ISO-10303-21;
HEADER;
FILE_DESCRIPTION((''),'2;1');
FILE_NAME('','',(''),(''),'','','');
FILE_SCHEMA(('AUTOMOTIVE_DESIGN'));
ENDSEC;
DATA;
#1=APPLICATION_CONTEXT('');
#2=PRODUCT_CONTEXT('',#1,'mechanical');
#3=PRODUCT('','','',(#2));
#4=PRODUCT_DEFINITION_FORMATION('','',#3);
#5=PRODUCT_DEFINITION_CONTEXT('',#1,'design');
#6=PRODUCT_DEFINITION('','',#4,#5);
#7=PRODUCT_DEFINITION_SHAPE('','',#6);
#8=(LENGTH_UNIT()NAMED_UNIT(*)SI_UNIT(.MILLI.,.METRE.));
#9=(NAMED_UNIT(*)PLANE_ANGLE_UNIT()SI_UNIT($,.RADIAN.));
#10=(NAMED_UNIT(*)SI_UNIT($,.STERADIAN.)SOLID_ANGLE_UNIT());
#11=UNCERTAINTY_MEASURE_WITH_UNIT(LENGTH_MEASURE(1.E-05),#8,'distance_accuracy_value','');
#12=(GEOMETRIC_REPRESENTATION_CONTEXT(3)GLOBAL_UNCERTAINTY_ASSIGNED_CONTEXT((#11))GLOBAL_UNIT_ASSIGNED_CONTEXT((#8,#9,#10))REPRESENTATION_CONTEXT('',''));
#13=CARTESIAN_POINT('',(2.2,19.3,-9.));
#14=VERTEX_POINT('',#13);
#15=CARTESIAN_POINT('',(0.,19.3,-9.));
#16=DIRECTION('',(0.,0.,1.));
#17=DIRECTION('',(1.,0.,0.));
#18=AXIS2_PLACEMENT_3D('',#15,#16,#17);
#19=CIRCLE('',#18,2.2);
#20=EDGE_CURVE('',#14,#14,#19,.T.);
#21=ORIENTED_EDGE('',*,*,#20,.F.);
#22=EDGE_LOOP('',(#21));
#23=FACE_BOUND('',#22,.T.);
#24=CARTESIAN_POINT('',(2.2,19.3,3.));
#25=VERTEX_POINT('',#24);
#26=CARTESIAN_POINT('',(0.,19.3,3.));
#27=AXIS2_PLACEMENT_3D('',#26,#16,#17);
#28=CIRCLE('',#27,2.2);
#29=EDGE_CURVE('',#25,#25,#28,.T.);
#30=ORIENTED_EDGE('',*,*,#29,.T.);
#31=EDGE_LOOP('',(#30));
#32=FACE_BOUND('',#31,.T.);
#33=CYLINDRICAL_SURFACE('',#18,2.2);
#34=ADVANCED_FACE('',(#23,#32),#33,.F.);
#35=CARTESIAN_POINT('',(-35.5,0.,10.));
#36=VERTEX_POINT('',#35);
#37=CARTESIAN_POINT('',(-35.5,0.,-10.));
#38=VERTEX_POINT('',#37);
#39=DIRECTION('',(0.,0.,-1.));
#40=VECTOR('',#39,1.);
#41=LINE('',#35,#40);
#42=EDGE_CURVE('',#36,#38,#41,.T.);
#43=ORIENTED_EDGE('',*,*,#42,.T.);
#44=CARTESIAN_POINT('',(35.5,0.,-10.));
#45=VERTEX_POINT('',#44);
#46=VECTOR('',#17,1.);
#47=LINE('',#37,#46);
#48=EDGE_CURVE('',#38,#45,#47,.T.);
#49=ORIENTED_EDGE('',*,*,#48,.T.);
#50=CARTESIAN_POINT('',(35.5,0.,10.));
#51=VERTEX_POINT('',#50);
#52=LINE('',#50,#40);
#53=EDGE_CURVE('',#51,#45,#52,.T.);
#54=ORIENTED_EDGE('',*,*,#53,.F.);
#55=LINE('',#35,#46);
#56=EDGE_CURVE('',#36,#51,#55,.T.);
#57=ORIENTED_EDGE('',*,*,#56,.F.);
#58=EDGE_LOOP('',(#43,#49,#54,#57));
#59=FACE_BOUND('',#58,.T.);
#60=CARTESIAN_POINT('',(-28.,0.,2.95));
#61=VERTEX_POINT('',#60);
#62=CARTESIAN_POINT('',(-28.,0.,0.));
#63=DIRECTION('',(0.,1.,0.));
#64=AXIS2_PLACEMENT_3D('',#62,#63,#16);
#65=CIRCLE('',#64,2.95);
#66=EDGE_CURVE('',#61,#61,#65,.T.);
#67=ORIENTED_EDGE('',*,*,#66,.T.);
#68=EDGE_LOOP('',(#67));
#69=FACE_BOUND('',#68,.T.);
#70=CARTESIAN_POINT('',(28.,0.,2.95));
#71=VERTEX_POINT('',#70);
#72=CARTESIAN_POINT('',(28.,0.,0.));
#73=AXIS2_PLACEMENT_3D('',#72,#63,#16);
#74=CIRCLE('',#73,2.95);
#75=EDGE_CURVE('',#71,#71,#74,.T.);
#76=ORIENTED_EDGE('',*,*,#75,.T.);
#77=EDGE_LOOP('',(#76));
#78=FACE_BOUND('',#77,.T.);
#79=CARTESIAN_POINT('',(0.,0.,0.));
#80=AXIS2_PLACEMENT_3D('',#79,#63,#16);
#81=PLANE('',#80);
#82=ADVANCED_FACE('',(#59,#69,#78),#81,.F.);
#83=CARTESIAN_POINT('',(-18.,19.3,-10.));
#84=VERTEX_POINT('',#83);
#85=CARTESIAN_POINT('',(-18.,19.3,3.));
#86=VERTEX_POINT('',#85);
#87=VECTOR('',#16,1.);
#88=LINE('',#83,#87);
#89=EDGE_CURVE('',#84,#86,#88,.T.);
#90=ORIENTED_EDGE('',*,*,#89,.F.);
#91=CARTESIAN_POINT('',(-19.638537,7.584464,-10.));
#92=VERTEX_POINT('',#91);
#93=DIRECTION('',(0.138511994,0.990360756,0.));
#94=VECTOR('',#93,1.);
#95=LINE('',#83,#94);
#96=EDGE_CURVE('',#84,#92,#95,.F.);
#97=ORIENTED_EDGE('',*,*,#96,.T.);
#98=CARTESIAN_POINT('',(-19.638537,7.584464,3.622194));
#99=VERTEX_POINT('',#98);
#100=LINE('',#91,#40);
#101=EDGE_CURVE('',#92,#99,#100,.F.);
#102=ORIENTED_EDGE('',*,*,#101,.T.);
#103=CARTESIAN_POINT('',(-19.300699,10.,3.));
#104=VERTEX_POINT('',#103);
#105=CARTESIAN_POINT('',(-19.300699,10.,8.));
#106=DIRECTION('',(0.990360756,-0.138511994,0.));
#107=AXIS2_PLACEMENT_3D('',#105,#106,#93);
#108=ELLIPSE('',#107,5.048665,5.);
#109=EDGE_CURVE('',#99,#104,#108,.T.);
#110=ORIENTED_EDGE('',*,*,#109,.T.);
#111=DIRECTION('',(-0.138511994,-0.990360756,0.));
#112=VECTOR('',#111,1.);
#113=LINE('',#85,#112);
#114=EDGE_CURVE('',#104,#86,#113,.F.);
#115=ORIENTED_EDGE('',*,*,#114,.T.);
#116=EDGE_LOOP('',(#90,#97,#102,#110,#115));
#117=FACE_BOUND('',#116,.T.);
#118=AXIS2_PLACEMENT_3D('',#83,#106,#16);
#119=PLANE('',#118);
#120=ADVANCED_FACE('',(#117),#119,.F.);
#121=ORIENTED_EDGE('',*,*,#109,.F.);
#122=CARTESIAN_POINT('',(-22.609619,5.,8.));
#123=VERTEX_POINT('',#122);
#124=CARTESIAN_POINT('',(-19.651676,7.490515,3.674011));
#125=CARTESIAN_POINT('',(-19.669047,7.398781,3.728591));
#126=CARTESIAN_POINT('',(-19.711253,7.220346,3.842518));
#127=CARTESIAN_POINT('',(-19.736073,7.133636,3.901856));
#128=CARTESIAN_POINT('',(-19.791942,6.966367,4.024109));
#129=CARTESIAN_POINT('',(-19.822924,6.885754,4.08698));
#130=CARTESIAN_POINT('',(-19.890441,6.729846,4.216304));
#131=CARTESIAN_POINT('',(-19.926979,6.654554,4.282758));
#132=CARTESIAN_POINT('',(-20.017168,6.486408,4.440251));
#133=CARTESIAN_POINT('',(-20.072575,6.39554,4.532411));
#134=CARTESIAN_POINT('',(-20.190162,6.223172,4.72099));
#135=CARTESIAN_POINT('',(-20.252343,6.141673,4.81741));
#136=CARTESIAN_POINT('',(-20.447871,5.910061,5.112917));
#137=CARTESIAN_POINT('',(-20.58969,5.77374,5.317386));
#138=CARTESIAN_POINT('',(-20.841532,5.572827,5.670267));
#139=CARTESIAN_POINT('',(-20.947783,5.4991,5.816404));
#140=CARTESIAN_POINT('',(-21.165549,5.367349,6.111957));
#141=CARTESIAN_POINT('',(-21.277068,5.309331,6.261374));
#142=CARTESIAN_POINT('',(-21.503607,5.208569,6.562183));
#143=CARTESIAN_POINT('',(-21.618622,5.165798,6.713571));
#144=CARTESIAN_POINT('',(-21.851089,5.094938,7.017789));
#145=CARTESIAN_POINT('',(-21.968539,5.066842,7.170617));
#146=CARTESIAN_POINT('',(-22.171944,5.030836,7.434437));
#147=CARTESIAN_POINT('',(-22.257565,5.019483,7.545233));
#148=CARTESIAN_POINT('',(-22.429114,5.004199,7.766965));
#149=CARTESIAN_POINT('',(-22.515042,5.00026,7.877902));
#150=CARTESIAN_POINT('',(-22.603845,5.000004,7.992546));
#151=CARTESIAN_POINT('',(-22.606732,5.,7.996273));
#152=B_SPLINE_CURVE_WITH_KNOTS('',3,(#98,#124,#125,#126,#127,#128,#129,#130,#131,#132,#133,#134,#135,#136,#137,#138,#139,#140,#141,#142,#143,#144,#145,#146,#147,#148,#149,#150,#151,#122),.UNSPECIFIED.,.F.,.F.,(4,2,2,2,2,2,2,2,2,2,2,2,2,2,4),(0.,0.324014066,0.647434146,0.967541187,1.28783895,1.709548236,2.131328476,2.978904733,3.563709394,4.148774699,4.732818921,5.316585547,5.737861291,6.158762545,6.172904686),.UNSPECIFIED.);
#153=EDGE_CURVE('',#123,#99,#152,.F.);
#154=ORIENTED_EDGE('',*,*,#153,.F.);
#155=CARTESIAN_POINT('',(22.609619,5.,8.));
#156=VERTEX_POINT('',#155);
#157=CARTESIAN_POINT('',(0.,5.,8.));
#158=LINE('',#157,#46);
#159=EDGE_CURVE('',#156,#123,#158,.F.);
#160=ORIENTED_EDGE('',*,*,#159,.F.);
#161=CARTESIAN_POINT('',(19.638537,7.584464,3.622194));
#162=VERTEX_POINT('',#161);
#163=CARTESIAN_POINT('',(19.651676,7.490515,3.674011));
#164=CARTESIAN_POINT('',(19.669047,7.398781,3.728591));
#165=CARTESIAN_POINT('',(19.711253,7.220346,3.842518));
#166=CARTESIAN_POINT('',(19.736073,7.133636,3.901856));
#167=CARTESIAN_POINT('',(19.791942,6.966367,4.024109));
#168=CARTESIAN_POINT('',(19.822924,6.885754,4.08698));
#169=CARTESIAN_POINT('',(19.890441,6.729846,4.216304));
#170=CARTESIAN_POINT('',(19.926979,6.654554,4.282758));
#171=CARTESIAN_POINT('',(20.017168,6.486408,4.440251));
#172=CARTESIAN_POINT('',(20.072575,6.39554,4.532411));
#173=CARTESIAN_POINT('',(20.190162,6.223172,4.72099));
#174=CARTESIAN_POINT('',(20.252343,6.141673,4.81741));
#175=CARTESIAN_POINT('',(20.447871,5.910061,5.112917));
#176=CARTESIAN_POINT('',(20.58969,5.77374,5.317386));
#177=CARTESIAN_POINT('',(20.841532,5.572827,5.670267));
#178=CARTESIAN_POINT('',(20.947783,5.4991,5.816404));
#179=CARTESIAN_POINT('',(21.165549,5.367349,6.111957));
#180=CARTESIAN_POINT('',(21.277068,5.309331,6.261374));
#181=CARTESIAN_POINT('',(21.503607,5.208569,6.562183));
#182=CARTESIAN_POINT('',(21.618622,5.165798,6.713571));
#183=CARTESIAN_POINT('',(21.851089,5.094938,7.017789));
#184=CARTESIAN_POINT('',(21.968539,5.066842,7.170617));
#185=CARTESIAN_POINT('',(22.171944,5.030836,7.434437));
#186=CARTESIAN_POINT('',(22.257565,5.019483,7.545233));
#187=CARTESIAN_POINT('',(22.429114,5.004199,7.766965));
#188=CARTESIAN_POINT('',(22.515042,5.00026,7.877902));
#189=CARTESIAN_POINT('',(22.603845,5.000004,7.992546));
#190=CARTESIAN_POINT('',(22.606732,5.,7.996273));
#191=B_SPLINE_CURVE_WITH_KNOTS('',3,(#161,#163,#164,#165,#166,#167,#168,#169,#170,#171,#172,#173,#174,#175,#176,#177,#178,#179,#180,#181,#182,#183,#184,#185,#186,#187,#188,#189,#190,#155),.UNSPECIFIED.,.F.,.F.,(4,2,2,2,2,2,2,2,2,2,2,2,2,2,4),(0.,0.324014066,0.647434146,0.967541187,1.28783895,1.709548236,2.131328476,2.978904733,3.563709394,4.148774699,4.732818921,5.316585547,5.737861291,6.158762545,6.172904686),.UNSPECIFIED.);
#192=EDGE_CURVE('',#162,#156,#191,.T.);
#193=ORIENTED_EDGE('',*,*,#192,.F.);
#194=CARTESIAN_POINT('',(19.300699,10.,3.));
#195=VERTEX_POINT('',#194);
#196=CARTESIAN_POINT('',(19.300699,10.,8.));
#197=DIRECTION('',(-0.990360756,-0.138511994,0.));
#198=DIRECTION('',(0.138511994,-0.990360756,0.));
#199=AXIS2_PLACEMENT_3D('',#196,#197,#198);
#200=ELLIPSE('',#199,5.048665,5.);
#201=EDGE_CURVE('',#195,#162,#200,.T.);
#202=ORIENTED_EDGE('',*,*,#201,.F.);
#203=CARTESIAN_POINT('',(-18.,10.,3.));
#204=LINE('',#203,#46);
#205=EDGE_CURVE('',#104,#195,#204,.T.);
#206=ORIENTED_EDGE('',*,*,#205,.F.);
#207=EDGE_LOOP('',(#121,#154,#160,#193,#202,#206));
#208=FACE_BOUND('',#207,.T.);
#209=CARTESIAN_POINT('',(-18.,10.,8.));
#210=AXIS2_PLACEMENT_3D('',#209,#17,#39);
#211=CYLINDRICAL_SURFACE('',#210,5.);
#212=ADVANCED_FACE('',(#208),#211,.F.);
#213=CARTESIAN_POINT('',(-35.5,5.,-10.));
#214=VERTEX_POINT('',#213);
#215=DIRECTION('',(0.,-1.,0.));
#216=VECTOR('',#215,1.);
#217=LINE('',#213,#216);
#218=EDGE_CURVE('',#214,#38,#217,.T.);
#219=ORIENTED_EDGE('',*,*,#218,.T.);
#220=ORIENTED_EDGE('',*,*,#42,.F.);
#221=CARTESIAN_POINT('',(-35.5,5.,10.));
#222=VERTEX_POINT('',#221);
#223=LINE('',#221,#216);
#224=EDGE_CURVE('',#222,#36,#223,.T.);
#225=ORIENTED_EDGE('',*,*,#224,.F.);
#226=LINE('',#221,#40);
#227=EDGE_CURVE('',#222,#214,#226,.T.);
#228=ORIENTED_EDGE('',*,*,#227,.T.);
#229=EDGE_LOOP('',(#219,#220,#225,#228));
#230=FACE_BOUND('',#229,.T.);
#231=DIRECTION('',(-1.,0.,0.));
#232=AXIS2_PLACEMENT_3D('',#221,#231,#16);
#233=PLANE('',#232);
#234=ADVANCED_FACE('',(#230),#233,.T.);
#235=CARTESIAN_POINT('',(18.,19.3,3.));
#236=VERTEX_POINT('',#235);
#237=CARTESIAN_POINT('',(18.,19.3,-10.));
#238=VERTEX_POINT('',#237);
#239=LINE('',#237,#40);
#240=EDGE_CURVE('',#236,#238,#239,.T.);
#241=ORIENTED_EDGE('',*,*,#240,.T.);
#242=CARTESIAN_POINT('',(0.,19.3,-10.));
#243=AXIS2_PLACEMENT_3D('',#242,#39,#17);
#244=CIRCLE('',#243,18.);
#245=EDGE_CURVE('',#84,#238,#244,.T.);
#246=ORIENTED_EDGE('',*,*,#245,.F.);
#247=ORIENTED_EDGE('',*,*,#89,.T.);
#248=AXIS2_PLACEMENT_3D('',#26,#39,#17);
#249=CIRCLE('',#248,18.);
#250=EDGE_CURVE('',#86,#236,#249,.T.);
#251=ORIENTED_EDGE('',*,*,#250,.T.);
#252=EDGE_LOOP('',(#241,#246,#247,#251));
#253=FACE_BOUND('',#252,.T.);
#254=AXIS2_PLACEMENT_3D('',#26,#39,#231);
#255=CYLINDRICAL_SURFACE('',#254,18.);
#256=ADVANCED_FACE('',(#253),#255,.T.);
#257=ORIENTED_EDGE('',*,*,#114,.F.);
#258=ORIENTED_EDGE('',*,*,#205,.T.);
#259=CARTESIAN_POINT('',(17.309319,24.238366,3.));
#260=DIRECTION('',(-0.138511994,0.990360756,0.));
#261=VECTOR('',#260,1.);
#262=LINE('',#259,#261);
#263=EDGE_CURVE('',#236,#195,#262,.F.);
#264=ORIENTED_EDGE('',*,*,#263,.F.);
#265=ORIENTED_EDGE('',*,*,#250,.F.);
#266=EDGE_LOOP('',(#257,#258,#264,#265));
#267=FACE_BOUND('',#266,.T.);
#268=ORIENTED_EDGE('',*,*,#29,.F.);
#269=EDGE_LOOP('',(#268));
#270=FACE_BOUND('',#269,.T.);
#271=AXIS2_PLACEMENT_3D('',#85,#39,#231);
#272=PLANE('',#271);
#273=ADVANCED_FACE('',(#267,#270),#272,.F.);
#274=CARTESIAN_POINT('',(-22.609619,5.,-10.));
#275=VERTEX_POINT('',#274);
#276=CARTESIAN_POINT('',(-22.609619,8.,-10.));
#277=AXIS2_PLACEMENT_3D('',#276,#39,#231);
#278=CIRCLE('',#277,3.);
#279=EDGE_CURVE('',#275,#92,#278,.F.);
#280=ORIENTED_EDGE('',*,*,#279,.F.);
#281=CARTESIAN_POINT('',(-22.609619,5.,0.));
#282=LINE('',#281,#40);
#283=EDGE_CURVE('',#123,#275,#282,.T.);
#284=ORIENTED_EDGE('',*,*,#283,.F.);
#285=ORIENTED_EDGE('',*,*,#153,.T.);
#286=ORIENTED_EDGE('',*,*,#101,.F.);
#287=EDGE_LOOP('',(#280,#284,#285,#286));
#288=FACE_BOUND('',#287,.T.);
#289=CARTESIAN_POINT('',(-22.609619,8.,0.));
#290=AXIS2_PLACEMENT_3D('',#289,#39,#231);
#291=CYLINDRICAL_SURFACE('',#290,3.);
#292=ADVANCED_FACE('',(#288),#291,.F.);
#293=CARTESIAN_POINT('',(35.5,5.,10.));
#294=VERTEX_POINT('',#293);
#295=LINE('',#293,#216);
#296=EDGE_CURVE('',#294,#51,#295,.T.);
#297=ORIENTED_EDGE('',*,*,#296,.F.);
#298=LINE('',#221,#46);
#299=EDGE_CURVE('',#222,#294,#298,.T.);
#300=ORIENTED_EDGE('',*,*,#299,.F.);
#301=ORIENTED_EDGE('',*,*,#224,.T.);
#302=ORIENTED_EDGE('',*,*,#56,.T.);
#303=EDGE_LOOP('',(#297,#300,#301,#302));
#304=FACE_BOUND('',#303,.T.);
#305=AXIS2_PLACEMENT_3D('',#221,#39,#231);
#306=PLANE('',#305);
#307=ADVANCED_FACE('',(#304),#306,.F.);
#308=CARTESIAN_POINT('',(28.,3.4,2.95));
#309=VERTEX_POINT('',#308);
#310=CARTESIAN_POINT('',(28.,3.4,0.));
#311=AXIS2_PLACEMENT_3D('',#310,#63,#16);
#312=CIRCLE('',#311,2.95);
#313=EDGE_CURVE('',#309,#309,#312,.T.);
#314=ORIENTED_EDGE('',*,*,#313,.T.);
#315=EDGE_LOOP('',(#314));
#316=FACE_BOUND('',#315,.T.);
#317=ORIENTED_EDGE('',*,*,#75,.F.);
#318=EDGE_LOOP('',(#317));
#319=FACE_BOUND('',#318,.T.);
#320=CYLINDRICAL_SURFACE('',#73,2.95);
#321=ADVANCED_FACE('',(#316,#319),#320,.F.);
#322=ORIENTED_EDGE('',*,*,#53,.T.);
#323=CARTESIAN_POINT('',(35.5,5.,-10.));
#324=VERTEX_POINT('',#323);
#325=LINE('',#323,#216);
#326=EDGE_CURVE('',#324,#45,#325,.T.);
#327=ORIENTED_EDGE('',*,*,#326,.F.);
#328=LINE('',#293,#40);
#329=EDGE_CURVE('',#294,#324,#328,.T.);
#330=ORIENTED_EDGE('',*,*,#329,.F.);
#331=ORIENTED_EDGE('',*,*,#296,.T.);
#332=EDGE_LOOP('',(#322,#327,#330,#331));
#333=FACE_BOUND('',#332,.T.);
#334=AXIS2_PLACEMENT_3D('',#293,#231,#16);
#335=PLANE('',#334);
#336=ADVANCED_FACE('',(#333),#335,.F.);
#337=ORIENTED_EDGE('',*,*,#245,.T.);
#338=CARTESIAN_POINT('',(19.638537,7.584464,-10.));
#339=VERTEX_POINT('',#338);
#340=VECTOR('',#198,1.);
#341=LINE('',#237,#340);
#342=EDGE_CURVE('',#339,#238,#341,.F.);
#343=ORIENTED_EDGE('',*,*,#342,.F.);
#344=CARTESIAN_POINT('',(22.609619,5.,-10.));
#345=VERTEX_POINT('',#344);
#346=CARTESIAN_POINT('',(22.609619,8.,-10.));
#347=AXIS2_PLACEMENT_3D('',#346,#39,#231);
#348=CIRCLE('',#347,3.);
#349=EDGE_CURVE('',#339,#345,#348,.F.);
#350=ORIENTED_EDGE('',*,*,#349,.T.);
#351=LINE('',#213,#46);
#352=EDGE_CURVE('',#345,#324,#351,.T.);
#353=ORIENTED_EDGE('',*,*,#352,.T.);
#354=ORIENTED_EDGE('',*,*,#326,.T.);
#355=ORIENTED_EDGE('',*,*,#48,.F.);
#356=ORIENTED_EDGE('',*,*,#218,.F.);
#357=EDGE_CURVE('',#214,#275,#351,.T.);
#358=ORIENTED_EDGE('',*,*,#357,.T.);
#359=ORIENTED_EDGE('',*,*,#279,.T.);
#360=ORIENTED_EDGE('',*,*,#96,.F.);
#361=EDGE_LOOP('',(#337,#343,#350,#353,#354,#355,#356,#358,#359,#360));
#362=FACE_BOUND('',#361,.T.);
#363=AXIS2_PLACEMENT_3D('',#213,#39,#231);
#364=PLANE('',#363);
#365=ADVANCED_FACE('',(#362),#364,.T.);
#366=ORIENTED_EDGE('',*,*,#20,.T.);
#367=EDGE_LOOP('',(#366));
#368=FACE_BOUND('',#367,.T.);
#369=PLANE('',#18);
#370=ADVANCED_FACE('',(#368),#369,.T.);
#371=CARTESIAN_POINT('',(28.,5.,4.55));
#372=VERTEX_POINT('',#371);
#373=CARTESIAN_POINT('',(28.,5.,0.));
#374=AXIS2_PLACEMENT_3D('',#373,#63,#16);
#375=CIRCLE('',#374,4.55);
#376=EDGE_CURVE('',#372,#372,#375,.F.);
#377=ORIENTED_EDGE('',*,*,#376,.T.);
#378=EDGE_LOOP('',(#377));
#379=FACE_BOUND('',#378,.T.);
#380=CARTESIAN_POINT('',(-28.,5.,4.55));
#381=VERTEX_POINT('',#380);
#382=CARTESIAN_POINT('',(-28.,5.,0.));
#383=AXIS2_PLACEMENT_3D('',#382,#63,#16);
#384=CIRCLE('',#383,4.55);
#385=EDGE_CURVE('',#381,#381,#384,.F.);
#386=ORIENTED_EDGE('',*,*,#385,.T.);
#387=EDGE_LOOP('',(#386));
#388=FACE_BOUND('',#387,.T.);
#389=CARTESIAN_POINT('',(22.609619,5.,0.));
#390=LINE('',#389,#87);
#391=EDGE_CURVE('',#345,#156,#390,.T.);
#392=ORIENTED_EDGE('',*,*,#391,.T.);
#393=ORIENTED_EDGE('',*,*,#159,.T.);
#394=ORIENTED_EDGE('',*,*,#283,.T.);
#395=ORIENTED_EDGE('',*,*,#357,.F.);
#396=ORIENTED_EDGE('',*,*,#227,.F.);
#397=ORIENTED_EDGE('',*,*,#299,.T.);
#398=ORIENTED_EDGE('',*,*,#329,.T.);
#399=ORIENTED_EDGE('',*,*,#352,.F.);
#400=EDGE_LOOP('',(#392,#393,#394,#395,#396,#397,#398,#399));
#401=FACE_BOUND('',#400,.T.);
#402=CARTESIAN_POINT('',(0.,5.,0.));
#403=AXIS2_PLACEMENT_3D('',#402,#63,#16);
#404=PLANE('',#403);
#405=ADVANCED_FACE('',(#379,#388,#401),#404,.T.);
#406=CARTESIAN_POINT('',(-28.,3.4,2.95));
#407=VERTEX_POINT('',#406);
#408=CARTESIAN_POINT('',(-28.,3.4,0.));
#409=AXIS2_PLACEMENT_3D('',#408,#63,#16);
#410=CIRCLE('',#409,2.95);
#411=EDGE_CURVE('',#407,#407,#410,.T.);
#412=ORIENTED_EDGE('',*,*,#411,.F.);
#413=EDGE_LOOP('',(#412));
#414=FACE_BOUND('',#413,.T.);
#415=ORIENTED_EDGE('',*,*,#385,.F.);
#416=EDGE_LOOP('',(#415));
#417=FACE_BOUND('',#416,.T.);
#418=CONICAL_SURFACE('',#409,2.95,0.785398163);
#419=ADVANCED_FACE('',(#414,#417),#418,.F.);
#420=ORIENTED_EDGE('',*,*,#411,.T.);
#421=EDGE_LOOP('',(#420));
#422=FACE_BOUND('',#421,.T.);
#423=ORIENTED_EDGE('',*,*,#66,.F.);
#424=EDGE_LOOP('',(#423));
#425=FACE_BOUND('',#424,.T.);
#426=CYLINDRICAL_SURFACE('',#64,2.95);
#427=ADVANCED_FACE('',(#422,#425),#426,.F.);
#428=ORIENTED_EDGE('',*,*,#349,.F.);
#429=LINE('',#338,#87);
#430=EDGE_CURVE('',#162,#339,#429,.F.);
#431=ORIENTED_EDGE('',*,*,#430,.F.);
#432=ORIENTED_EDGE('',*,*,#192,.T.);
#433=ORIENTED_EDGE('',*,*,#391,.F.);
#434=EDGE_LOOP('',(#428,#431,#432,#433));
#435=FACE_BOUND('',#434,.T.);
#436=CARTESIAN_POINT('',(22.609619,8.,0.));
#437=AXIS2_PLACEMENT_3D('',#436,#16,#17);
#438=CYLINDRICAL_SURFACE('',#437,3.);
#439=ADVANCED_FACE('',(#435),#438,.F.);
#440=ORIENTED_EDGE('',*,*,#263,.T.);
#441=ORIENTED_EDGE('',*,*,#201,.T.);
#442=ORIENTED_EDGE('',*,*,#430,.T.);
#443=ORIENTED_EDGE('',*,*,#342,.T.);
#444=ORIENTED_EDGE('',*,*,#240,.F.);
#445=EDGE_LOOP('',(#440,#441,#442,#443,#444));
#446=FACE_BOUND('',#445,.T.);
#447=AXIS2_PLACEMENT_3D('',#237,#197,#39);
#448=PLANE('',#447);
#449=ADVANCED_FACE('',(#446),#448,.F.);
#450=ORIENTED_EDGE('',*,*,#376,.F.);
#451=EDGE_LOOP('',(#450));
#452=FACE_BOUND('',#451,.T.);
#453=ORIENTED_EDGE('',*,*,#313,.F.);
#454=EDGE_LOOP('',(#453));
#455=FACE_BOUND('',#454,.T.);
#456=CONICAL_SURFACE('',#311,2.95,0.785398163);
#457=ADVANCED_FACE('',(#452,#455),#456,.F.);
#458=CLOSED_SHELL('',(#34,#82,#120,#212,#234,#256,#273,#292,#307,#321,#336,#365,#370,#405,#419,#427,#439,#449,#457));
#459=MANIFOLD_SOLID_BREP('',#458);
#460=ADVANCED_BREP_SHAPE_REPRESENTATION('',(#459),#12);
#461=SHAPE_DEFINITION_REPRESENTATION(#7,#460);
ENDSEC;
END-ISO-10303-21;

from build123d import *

# Parameters (mm, degrees)
SKETCH1_W           = 71
SKETCH1_H           = 20
BOSS_EXTRUDE1_DEPTH = 5
SKETCH2_R           = 2.95
CUT_EXTRUDE1_DEPTH  = 5
CHAMFER1_SIZE       = 1.6
SKETCH3_W           = 36
SKETCH3_H           = 13
BOSS_EXTRUDE2_DEPTH = 14.3
BOSS_EXTRUDE3_DEPTH = 13
CHAMFER2_START      = -20.499775095
CHAMFER2_OUTLINE_W  = 14.439182802
CHAMFER2_OUTLINE_H  = 13
CHAMFER2_DEPTH      = 2.499775095
CHAMFER3_START      = 18
CHAMFER3_OUTLINE_W  = 14.439182802
CHAMFER3_OUTLINE_H  = 13
CHAMFER3_DEPTH      = 2.499775095
SKETCH6_R           = 2.2
CUT_EXTRUDE2_DEPTH  = 12
FILLET2_R           = 3
FILLET3_R           = 5


with BuildPart() as part:
    # Sketch1 → Boss-Extrude1 (new body)
    with BuildSketch(Plane(origin=(0, 0, 0), x_dir=(1, 0, 0), z_dir=(0, 1, 0))):
        Rectangle(SKETCH1_W, SKETCH1_H)
    extrude(amount=BOSS_EXTRUDE1_DEPTH)

    # Sketch2 → Cut-Extrude1 (cut)
    with BuildSketch(Plane(origin=(0, 5, 0), x_dir=(1, 0, 0), z_dir=(0, 1, 0))):
        with Locations(Location((28, 0, 0), (0, 0, 270))):
            Circle(SKETCH2_R)
        with Locations(Location((-28, 0, 0), (0, 0, 270))):
            Circle(SKETCH2_R)
    extrude(amount=-CUT_EXTRUDE1_DEPTH, mode=Mode.SUBTRACT)

    # Chamfer1
    chamfer1_edges = [part.edges().sort_by_distance(p)[0] for p in [
        (28, 5, -2.95),
        (-28, 5, -2.95),
    ]]
    chamfer(chamfer1_edges, length=CHAMFER1_SIZE)

    # Sketch3 → Boss-Extrude2 (add)
    with BuildSketch(Plane(origin=(0, 5, 0), x_dir=(1, 0, 0), z_dir=(0, 1, 0))):
        with Locations((0, 3.5)):
            Rectangle(SKETCH3_W, SKETCH3_H)
    extrude(amount=BOSS_EXTRUDE2_DEPTH)

    # Sketch5 → Boss-Extrude3 (add)
    with BuildSketch(Plane(origin=(0, 0, -10), x_dir=(-1, 0, 0), z_dir=(0, 0, -1))):
        with BuildLine():
            Line((-18, 19.3), (18, 19.3))
            ThreePointArc((18, 19.3), (0, 37.3), (-18, 19.3))
        make_face()
    extrude(amount=-BOSS_EXTRUDE3_DEPTH)

    # Chamfer2: read off the stored shape, not the designer's step
    # Chamfer2 outline → Chamfer2 (add)
    with BuildSketch(Plane(origin=(0, 0, 0), x_dir=(0.13851199388326604, 0.9903607562653531, 0), z_dir=(0.9903607562653531, -0.13851199388326602, 0)).offset(CHAMFER2_START)):
        with Locations((9.401155305, -3.5)):
            Rectangle(CHAMFER2_OUTLINE_W, CHAMFER2_OUTLINE_H)
    extrude(amount=CHAMFER2_DEPTH)

    # Chamfer3: read off the stored shape, not the designer's step
    # Chamfer3 outline → Chamfer3 (add)
    with BuildSketch(Plane(origin=(0, 0, 0), x_dir=(-0.13851199388326604, 0.9903607562653531, 0), z_dir=(0.9903607562653531, 0.13851199388326602, 0)).offset(CHAMFER3_START)):
        with Locations((9.401155305, -3.5)):
            Rectangle(CHAMFER3_OUTLINE_W, CHAMFER3_OUTLINE_H)
    extrude(amount=CHAMFER3_DEPTH)

    # Sketch6 → Cut-Extrude2 (cut)
    with BuildSketch(Plane.XY.offset(3)):
        with Locations((0, 19.3)):
            Circle(SKETCH6_R)
    extrude(amount=-CUT_EXTRUDE2_DEPTH, mode=Mode.SUBTRACT)

    # Fillet2
    fillet2_edges = [part.edges().sort_by_distance(p)[0] for p in [
        (-20, 5, -3.5),
        (20, 5, -3.5),
    ]]
    fillet(fillet2_edges, radius=FILLET2_R)

    # Fillet3
    fillet3_edges = [part.edges().sort_by_distance(p)[0] for p in [
        (-1, 5, 3),
    ]]
    fillet(fillet3_edges, radius=FILLET3_R)


solid = part.part
